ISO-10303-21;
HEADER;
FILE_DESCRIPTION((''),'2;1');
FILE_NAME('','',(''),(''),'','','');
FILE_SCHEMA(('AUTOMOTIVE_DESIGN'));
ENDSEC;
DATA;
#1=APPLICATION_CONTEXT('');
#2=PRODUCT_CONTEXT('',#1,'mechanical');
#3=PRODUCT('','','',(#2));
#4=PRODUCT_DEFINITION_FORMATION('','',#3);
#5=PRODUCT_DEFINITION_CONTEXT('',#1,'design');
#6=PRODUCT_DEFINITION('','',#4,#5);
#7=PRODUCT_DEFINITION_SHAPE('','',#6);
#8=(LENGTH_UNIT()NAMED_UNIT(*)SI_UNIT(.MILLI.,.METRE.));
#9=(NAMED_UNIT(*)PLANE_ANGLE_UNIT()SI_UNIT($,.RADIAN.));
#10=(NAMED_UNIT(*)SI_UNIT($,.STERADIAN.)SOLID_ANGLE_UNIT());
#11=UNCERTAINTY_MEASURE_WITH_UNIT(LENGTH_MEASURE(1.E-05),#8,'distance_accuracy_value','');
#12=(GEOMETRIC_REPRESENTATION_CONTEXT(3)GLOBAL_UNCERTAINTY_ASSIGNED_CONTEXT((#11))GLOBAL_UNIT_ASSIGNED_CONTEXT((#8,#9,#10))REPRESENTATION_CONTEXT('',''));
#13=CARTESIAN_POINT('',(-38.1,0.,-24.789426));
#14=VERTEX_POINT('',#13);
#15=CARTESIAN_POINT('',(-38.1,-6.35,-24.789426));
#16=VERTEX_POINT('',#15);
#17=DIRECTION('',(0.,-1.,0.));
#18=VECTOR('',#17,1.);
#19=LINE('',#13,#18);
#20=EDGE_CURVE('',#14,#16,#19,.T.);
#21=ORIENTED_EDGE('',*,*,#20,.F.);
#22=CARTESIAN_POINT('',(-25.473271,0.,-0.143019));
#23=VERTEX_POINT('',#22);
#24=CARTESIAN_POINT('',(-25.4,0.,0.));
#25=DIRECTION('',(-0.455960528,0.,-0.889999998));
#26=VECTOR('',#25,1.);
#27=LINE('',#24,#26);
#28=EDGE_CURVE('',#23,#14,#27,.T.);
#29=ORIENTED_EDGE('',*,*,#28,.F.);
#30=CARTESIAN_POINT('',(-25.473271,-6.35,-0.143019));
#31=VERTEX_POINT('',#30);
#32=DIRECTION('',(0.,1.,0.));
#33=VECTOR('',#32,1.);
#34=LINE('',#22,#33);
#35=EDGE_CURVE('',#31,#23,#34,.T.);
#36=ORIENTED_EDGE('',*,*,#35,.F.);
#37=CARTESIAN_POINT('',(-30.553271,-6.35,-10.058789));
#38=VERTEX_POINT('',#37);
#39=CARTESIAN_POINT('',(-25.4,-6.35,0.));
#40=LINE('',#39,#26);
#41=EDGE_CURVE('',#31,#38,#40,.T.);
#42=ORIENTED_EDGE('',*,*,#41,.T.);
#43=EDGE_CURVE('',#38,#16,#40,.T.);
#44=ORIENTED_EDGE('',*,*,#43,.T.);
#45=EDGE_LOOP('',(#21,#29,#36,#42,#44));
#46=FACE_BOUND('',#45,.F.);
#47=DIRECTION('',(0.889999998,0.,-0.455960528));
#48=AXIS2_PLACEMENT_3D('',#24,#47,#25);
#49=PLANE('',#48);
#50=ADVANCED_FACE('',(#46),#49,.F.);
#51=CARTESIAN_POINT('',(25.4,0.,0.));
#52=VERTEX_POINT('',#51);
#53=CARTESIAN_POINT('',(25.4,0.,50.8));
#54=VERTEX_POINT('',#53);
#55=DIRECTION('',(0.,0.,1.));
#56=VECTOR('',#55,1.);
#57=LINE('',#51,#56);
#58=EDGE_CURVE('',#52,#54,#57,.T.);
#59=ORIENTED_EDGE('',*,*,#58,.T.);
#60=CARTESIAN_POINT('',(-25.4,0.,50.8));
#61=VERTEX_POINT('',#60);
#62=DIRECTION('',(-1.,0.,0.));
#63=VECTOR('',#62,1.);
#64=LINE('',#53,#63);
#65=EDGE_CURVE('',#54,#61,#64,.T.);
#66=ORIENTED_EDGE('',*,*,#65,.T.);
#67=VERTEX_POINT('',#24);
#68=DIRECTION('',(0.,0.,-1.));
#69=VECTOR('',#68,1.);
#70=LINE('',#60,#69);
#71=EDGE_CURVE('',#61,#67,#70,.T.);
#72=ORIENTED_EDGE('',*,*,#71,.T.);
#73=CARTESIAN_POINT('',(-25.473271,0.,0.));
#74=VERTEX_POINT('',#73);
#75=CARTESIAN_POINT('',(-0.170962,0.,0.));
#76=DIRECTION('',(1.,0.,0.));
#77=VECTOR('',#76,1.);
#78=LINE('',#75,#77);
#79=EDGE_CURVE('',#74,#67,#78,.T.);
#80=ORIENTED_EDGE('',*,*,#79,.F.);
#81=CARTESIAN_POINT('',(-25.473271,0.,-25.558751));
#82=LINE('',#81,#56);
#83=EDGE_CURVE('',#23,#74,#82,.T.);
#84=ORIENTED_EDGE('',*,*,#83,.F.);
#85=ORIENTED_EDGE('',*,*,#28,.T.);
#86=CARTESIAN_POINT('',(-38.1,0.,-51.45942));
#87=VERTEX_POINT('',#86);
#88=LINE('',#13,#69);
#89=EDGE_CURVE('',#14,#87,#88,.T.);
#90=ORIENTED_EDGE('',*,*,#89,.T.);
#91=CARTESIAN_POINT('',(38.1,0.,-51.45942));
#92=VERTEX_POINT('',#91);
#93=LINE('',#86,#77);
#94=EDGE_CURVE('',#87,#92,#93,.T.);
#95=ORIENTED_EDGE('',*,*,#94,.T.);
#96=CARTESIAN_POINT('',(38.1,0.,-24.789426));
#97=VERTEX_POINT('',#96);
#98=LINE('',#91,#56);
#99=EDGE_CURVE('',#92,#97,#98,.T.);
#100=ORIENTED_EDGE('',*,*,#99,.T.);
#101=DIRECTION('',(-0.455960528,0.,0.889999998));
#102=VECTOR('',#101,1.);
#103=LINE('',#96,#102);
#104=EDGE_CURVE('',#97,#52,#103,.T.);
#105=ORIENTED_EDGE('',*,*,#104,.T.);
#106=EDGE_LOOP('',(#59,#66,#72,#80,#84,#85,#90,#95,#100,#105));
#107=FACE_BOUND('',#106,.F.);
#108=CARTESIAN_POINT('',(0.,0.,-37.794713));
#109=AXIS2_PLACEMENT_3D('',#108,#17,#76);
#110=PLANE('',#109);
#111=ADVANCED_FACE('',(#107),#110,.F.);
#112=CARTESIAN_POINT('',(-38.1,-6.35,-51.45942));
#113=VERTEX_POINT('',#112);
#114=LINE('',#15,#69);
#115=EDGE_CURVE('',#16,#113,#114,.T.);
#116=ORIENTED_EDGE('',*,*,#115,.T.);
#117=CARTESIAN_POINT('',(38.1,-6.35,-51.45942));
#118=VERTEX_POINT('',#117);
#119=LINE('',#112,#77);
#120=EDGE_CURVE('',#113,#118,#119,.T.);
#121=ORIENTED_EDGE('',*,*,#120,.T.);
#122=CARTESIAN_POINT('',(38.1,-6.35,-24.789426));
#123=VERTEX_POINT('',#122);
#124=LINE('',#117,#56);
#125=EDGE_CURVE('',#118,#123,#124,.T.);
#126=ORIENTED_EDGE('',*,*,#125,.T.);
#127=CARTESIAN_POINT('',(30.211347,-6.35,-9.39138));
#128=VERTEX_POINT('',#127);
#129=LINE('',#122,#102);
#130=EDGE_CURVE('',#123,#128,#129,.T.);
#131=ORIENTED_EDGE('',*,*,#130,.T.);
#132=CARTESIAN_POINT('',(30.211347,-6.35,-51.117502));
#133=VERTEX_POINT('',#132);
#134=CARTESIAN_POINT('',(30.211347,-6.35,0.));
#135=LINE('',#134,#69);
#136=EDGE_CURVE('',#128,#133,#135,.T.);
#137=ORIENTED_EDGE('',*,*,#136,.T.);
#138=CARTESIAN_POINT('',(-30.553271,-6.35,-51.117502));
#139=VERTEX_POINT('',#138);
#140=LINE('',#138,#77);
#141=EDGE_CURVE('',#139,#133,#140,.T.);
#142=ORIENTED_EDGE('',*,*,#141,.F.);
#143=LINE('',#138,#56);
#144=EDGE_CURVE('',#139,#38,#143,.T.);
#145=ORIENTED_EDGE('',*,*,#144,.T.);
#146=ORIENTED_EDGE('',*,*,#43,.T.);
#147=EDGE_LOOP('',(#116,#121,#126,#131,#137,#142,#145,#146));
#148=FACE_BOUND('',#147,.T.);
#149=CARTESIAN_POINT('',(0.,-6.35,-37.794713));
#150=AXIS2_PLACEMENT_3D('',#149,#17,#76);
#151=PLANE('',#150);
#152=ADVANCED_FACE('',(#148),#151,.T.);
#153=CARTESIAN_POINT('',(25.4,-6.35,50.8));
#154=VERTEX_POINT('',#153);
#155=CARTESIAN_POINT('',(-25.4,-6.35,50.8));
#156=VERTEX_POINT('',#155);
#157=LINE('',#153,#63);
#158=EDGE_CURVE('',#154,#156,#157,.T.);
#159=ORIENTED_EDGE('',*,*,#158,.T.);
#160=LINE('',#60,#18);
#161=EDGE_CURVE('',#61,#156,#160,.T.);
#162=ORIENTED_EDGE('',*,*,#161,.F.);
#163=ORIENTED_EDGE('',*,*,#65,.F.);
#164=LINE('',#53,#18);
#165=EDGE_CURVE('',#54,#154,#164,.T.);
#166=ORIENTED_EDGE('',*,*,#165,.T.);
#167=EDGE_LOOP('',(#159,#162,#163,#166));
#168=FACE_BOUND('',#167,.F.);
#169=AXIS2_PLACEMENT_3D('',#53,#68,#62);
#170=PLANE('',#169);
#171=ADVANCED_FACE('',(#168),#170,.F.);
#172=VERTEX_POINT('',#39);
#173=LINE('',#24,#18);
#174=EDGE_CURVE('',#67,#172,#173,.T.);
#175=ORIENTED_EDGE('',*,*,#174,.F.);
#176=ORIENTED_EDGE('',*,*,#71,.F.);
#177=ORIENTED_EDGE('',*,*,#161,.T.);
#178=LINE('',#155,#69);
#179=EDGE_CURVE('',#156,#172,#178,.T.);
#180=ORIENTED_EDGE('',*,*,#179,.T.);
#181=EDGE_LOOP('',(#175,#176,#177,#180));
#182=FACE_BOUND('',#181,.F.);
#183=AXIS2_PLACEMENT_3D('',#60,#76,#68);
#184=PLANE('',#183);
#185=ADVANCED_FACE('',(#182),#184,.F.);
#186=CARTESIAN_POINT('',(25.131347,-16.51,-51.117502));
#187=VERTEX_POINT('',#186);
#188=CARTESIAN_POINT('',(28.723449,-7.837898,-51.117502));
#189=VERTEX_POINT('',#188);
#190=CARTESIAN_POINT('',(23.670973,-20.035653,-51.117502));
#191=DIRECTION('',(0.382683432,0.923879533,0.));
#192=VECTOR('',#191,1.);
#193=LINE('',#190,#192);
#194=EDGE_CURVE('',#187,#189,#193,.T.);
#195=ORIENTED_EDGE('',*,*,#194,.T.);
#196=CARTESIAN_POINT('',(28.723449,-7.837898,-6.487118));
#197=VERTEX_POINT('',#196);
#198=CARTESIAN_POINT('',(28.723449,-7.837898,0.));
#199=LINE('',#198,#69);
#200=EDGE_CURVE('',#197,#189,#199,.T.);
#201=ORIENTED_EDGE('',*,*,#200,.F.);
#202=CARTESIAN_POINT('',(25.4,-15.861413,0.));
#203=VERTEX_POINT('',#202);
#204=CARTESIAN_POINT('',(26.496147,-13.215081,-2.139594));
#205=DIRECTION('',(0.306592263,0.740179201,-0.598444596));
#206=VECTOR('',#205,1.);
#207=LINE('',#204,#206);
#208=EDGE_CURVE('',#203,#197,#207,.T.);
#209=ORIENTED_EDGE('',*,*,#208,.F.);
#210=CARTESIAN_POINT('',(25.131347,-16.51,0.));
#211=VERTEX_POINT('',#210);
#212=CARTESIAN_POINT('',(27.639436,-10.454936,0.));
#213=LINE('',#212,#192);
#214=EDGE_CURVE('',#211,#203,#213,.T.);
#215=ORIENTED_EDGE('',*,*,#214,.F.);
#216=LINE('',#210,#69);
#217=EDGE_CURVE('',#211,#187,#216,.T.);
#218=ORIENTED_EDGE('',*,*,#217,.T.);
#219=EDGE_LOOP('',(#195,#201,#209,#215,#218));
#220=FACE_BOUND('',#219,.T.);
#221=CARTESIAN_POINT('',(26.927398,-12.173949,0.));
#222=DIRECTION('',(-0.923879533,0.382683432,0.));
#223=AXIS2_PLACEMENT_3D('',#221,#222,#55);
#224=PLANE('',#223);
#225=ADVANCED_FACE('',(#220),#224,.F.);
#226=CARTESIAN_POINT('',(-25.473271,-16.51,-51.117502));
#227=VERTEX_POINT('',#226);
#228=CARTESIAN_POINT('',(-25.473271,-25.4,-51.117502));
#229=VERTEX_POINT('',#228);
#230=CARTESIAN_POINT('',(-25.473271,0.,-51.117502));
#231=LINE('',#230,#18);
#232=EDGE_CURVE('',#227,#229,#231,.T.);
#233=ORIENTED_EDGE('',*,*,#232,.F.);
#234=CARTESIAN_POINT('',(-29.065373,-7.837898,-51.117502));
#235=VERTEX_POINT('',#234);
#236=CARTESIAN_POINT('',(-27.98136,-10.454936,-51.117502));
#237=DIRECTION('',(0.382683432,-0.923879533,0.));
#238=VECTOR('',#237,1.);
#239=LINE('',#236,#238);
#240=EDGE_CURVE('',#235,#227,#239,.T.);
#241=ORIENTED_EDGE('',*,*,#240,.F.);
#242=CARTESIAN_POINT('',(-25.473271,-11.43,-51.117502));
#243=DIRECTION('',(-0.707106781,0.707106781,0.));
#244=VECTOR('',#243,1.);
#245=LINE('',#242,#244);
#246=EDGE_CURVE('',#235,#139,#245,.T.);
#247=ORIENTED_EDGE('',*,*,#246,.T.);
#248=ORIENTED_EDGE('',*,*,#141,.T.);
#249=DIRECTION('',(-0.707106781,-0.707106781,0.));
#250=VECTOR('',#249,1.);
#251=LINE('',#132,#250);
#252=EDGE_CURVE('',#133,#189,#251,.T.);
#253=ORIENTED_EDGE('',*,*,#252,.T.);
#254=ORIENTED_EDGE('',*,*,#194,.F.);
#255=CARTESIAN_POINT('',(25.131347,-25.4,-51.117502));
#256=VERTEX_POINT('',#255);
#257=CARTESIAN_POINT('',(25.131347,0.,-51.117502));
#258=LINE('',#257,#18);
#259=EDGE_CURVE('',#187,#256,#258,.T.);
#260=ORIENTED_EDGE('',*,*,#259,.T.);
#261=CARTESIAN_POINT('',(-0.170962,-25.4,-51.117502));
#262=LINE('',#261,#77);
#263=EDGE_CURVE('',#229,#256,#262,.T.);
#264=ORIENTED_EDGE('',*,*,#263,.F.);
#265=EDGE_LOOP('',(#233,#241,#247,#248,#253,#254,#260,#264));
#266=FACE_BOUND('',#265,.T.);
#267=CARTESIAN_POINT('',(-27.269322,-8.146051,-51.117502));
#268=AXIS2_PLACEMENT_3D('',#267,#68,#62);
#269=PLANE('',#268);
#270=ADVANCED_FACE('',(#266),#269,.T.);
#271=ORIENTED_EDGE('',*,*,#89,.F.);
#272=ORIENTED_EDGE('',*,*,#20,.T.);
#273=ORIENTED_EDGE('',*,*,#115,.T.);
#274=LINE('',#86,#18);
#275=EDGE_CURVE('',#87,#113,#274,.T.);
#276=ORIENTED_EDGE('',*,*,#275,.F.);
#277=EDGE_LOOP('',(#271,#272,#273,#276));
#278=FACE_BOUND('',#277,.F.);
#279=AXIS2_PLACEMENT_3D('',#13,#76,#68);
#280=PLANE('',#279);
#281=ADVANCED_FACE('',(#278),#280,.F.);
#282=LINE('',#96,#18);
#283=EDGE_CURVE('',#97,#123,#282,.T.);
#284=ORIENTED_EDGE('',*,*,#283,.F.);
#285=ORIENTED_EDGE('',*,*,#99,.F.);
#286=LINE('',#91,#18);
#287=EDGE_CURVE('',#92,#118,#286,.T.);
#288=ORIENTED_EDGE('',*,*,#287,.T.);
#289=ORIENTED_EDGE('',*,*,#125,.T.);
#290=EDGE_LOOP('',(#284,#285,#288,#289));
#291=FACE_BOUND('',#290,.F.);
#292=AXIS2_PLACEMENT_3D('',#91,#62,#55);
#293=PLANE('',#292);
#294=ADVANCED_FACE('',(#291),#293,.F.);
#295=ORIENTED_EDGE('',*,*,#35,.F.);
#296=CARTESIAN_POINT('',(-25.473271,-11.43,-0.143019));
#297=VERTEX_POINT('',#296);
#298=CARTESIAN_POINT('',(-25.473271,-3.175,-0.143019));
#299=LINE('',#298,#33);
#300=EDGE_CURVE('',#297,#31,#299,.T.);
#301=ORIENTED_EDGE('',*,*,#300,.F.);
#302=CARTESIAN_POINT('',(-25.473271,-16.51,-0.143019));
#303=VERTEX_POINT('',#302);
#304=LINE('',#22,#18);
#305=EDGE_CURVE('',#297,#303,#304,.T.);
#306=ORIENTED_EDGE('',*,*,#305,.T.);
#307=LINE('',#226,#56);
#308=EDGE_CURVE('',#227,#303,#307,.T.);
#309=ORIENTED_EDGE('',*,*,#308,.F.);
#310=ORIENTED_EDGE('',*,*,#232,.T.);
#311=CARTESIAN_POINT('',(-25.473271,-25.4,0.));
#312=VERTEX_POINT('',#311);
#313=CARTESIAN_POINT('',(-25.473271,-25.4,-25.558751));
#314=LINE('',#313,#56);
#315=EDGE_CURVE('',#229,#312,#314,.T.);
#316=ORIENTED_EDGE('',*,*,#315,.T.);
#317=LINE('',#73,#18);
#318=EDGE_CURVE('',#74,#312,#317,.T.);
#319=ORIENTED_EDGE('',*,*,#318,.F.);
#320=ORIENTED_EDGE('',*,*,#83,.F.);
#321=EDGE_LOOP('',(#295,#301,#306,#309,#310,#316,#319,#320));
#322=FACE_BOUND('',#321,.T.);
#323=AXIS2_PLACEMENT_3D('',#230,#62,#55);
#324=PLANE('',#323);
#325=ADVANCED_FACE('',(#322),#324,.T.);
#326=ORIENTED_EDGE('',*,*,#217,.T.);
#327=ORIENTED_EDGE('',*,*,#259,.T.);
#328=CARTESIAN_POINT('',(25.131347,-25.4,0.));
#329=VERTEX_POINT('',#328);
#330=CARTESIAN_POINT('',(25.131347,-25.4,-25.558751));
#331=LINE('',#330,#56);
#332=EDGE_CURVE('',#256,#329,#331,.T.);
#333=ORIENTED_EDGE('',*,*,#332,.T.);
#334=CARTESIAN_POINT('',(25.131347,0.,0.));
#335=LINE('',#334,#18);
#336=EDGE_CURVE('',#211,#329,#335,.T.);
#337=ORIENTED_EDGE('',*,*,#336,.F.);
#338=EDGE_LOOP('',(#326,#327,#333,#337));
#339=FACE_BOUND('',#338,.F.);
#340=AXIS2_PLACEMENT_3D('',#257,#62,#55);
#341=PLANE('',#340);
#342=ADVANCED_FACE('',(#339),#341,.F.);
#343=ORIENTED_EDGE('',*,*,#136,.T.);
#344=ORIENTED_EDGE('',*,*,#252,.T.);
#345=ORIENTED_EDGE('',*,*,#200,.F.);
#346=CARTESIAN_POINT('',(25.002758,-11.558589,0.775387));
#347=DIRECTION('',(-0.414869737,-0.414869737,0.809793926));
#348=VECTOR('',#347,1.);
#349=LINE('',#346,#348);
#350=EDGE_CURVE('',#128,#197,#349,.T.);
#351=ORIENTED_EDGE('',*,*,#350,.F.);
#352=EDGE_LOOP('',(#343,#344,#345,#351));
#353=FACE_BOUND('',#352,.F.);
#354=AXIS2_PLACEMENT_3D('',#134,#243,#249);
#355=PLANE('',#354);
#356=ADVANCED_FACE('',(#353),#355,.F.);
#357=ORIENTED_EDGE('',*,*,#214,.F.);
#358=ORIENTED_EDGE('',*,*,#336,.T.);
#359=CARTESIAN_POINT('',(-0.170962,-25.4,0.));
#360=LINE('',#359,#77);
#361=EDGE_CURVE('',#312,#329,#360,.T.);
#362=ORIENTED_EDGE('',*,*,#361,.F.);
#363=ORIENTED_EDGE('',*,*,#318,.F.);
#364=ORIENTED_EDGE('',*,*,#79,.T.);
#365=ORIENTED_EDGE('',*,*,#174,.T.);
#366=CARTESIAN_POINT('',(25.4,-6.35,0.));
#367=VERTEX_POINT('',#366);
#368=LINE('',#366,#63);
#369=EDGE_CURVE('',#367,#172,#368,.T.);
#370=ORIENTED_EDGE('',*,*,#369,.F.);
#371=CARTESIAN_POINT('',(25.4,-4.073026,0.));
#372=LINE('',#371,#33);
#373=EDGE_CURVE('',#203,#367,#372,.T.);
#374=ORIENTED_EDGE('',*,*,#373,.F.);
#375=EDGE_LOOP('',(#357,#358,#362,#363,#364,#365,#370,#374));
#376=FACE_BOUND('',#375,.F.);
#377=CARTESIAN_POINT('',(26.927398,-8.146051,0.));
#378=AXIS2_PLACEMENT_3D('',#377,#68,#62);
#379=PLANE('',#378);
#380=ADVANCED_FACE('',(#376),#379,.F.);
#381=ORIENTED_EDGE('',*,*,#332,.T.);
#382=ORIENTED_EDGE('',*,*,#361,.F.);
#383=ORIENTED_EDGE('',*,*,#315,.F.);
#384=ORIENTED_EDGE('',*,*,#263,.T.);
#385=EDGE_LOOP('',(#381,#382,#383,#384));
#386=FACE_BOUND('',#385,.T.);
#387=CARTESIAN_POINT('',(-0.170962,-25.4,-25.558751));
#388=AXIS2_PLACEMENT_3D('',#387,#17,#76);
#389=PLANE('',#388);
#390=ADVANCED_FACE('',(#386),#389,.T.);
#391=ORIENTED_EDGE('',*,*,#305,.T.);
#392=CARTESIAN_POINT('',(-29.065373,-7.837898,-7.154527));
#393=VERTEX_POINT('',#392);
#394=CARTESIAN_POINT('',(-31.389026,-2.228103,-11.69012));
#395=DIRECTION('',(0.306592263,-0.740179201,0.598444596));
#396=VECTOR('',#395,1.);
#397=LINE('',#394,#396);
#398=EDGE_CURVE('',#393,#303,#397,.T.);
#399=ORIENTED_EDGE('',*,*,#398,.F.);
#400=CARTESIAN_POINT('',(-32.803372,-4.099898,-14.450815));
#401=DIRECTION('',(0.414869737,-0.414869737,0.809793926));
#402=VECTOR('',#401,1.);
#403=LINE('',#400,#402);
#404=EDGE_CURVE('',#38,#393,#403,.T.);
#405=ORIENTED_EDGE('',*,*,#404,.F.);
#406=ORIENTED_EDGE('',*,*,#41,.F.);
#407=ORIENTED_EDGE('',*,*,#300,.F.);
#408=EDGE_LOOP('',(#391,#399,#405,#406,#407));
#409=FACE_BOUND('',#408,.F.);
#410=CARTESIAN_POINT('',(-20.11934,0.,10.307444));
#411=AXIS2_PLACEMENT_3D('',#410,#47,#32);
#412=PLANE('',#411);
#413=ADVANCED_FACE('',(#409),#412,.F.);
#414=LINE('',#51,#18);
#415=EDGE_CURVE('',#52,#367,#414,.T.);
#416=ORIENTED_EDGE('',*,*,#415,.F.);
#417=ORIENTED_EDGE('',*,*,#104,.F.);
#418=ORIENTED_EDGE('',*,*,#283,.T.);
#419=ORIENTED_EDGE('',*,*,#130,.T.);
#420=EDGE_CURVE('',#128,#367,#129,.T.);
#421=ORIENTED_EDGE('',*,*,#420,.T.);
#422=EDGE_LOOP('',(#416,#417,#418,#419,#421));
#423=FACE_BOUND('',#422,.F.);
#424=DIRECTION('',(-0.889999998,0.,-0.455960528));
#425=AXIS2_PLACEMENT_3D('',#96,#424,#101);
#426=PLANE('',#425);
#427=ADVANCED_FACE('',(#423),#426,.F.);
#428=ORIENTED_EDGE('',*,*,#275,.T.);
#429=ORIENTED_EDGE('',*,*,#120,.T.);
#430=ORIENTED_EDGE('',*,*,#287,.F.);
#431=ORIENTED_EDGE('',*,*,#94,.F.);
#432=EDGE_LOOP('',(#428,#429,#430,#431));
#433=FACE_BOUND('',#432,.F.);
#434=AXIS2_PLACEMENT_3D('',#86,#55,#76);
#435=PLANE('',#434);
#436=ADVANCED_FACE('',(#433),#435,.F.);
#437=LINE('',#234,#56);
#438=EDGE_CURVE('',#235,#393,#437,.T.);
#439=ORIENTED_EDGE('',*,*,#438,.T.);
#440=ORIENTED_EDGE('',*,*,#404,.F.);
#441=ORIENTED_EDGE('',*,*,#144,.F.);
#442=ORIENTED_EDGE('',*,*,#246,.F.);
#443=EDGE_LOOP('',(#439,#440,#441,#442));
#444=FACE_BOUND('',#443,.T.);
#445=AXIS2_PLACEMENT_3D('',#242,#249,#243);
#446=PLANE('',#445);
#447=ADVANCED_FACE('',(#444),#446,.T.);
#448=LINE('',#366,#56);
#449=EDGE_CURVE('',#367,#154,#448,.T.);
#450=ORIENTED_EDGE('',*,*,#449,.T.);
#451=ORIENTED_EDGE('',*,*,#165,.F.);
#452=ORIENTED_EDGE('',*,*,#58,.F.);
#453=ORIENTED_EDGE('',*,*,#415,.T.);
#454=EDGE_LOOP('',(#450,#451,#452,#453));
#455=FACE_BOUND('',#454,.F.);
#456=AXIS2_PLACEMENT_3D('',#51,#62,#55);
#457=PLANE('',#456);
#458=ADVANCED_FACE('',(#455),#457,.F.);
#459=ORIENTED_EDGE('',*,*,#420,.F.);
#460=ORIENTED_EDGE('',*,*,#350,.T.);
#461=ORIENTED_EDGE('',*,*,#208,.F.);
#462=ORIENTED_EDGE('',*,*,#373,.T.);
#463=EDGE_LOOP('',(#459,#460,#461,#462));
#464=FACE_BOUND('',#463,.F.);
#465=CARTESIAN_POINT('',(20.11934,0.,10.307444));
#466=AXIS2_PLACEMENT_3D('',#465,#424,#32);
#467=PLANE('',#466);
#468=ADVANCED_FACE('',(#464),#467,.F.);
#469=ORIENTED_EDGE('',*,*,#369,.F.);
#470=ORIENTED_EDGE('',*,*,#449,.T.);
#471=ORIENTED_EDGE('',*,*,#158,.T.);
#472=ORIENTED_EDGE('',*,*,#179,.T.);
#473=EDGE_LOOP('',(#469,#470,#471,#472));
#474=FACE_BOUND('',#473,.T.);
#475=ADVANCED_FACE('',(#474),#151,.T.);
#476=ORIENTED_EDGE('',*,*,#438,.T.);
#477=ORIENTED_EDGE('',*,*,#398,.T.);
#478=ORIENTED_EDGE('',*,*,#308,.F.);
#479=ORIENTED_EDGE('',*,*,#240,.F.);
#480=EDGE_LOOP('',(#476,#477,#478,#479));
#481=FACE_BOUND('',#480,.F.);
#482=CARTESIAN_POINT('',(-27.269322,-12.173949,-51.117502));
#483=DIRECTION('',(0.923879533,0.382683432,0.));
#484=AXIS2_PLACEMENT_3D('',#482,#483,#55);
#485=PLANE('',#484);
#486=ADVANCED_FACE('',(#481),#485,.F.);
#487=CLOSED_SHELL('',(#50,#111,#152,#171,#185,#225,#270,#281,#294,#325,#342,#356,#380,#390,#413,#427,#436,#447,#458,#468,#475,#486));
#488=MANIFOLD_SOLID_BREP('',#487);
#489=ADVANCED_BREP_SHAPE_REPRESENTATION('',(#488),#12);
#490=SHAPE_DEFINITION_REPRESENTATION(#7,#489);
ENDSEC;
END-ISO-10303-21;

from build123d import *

# Parameters (mm, degrees)
F0_W        = 50.8
F0_H        = 26.0105735242
F1_DEPTH    = 6.35
F2_W        = 50.6046172231
F2_H        = 51.1175021529
F3_DEPTH    = 25.4
F4_T4_DEPTH = 51.1175021529
F4_T9_DEPTH = 64.038633205
F5_SIZE     = 5.08


# Not quite as in the source:
# - a fillet or chamfer that OpenCascade refuses, or shapes differently, is made with other operations: its cross-section is extruded or revolved along the edge and cut away or added


with BuildPart() as f1:
    # F0 (on Front) → F1 (new body)
    with BuildSketch(Plane.XZ):
        with Locations((0, -37.7947132379)):
            Rectangle(F0_W, F0_H)
        Polygon((-38.1, -24.7894264758), (-25.4, -24.7894264758), (-25.4, 0), align=None)
        Polygon((25.4, -50.8), (-25.4, -50.8), (-25.4, -24.7894264758), (-38.1, -24.7894264758), (-38.1, -51.4594204724), (38.1, -51.4594204724), (38.1, -24.7894264758), (25.4, -24.7894264758), align=None)
        Polygon((25.4, 0), (25.4, -24.7894264758), (38.1, -24.7894264758), align=None)
        Polygon((-25.4, 0), (-25.4, -24.7894264758), (25.4, -24.7894264758), (25.4, 0), (25.4, 50.8), (-25.4, 50.8), align=None)
    extrude(amount=F1_DEPTH)

    # F2 (on Front) → F3 (join)
    with BuildSketch(Plane.XZ):
        with Locations((-0.1709619537, -25.5587510765)):
            Rectangle(F2_W, F2_H)
    extrude(amount=F3_DEPTH)

    # F4: chamfer of 5.08 on 2 edges, made by hand


with BuildPart() as f4_tool2:
    # F4_s3 → F4_t4 (new body)
    with BuildSketch(Plane.XY):
        Polygon((30.2113466579, -6.35), (25.1313466579, -11.43), (25.1313466579, -6.35), align=None)
    extrude(amount=-F4_T4_DEPTH)

    split(bisect_by=Plane(origin=(20.1193399264, 0, 10.3074436722), x_dir=(0, 1, 0), z_dir=(-0.8899999984, 0, -0.4559605278)), keep=Keep.TOP)


with BuildPart() as f1_1:
    add(f1.part)

    # F4_t1: union F4_tool2
    add(f4_tool2.part)


with BuildPart() as f4_tool7:
    # F4_s8 → F4_t9 (new body)
    with BuildSketch(Plane.XY.offset(-51.1175021529)):
        Polygon((-25.4732705653, -11.43), (-30.5532705653, -6.35), (-25.4732705653, -6.35), align=None)
    extrude(amount=F4_T9_DEPTH)

    split(bisect_by=Plane(origin=(-20.1193399264, 0, 10.3074436722), x_dir=(0, 1, 0), z_dir=(0.8899999984, 0, -0.4559605278)), keep=Keep.TOP)


with BuildPart() as f1_2:
    add(f1_1.part)

    # F4_t6: union F4_tool7
    add(f4_tool7.part)

    # F5
    f5_edges = [f1_2.edges().sort_by_distance(p)[0] for p in [
        (25.131347, -11.43, -25.558751),
        (-25.473271, -11.43, -25.63026),
    ]]
    chamfer(f5_edges, length=F5_SIZE)


solid = f1_2.part
